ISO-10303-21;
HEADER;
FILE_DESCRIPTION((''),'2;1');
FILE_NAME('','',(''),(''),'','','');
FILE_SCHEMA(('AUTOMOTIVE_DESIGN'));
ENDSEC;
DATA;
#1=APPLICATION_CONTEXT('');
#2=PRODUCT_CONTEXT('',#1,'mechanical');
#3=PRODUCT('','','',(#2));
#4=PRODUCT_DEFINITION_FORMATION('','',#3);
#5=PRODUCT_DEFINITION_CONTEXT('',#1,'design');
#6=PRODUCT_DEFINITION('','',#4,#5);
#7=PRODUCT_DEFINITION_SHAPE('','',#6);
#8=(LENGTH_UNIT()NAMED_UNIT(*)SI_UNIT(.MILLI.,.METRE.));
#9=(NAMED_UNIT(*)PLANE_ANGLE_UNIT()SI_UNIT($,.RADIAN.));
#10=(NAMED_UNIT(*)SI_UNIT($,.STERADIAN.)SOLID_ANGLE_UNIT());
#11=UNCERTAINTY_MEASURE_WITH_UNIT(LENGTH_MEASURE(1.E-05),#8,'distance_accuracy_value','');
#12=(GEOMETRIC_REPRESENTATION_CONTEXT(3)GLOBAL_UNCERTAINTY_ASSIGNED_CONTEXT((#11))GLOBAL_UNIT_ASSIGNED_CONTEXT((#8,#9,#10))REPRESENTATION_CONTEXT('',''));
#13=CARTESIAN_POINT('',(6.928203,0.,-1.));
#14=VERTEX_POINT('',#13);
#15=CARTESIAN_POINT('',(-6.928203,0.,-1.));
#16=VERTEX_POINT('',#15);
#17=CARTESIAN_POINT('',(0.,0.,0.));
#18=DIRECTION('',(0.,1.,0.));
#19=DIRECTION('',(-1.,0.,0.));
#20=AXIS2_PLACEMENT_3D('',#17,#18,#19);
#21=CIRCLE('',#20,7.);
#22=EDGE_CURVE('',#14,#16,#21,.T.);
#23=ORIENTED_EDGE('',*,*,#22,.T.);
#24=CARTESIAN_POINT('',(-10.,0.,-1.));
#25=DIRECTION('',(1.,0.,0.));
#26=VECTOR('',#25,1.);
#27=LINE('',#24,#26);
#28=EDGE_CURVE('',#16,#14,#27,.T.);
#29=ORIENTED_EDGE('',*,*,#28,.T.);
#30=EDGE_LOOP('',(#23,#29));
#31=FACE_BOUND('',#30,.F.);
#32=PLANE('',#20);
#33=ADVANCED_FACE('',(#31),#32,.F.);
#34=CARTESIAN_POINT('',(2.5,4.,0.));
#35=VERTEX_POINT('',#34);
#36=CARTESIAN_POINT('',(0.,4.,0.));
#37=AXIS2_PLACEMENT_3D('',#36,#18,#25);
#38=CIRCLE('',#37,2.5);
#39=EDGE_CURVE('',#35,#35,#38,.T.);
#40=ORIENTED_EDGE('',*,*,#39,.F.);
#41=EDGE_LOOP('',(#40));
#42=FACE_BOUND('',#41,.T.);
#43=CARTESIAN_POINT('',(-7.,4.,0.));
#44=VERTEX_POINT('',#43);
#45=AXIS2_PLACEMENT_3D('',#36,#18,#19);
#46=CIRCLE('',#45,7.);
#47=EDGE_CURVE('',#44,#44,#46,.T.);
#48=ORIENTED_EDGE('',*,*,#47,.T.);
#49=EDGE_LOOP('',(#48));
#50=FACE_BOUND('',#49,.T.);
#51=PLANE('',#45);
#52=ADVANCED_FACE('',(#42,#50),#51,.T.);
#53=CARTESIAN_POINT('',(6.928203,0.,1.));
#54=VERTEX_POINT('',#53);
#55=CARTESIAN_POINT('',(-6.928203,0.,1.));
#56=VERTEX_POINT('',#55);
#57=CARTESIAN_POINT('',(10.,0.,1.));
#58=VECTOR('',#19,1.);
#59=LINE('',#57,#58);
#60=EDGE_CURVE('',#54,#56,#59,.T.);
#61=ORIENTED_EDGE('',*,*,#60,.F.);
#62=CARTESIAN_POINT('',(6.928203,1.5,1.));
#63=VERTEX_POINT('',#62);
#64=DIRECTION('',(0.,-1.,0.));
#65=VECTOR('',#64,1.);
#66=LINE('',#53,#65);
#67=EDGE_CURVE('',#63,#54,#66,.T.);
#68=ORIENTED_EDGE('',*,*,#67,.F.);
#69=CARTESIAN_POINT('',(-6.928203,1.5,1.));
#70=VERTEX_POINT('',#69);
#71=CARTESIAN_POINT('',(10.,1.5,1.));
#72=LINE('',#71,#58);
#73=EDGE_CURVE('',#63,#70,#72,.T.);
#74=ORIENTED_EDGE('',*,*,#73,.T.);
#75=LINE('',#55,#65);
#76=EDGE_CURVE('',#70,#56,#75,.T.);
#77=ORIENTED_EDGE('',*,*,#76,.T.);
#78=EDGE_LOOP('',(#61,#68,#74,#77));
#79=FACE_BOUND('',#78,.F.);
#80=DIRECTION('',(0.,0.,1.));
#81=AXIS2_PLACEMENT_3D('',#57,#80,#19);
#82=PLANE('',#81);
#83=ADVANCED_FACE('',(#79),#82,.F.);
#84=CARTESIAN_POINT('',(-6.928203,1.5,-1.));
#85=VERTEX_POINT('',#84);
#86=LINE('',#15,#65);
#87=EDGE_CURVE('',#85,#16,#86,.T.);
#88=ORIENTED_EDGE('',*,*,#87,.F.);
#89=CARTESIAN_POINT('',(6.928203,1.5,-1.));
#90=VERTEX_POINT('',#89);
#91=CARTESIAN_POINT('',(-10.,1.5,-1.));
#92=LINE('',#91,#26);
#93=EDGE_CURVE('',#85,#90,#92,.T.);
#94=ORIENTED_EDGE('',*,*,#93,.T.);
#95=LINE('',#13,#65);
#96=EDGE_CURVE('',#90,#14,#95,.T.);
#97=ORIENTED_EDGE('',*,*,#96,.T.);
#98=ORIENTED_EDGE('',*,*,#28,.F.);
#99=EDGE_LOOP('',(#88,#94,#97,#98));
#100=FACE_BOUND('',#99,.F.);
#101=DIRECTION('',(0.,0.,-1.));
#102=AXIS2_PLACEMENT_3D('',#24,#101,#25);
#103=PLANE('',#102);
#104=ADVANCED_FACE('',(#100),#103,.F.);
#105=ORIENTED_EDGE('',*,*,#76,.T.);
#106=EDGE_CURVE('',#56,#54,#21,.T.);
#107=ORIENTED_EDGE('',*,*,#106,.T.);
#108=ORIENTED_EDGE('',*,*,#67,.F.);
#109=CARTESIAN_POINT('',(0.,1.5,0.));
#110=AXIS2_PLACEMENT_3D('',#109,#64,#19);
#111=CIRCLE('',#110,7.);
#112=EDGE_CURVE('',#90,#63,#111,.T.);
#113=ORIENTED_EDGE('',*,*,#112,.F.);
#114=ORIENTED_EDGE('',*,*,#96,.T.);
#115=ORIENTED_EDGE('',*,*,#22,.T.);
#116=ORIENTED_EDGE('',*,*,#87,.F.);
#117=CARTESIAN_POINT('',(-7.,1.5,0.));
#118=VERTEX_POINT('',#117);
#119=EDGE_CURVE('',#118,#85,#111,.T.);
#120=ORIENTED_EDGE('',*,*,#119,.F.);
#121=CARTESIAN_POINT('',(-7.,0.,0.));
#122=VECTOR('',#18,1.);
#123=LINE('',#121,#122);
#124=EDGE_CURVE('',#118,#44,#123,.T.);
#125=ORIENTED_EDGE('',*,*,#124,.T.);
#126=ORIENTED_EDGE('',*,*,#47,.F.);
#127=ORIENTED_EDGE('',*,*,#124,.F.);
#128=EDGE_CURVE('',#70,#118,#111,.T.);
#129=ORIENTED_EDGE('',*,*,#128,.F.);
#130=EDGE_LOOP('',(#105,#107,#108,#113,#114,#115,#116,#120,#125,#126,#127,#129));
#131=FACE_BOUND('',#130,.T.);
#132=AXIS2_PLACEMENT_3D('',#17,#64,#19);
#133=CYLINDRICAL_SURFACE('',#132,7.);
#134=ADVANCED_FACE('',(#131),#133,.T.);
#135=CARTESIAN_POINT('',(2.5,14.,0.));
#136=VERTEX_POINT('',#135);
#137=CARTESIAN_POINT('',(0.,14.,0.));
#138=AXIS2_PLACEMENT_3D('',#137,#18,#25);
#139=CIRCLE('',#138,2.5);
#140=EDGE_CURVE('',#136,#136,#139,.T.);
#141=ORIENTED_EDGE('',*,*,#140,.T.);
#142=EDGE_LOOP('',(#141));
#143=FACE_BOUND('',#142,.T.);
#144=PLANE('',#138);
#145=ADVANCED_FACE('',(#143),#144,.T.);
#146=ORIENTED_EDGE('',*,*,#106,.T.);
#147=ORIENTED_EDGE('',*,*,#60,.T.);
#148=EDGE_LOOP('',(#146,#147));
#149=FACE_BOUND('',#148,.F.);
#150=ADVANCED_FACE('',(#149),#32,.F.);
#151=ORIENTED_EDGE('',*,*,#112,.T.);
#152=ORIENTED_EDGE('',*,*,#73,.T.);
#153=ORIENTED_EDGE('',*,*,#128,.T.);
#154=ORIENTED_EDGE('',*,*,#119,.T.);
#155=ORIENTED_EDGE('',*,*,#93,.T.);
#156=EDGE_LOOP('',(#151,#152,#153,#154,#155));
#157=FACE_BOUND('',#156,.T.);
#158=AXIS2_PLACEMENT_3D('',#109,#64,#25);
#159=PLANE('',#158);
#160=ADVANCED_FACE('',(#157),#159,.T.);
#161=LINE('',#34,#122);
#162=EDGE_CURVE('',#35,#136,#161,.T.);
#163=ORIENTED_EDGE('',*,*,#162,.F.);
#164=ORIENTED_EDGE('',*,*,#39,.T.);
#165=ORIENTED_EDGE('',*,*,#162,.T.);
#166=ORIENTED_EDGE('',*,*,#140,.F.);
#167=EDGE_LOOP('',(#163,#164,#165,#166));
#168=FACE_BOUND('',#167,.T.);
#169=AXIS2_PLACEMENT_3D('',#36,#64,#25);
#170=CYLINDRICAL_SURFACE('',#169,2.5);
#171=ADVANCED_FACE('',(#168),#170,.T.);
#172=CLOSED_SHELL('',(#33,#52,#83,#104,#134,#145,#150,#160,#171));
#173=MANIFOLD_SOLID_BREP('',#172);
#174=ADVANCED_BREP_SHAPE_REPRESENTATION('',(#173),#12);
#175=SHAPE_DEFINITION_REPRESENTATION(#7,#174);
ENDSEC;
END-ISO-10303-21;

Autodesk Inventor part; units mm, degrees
ref_plane "YZ Plane" through (0, 0, 0) normal (1, 0, 0) x (0, 1, 0)
ref_plane "XZ Plane" through (0, 0, 0) normal (0, 1, 0) x (-1, 0, 0)
ref_plane "XY Plane" through (0, 0, 0) normal (0, 0, 1) x (1, 0, 0)
sketch "スケッチ1" plane through (0, 0, 0) normal (0, 1, 0) x (-1, 0, 0)
  circle A0 centre (0, 0) radius 7
  dimension "d0" = 14
extrude "押し出し1" add sketch "スケッチ1" along normal blind 4
sketch "スケッチ2" plane through (0, 4, 0) normal (0, 1, 0) x (1, 0, 0)
  circle A0 centre (0, 0) radius 2.5
  dimension "d3" = 5
extrude "押し出し2" add sketch "スケッチ2" along normal blind 10
thread "ねじ1" size "M6x1" class "6g" standard "ANSI Metric M Profile" length 10 offset 4
sketch "スケッチ3" plane through (0, 0, 0) normal (0, -1, 0) x (1, 0, 0)
  line L0 (10, 1) -> (-10, 1)
  line L1 (-10, 1) -> (-10, -1)
  line L2 (-10, -1) -> (10, -1)
  line L3 (10, -1) -> (10, 1)
  point P0 (0, 0)
  point P1 (0, 1)
  dimension "d8" = 20
  dimension "d9" = 2
  dimension "d10" = 1
  dimension "d11" = 10
extrude "押し出し3" cut sketch "スケッチ3" against normal blind 1.5
properties part number "camera_mount" material "アルミニウム 6061"
